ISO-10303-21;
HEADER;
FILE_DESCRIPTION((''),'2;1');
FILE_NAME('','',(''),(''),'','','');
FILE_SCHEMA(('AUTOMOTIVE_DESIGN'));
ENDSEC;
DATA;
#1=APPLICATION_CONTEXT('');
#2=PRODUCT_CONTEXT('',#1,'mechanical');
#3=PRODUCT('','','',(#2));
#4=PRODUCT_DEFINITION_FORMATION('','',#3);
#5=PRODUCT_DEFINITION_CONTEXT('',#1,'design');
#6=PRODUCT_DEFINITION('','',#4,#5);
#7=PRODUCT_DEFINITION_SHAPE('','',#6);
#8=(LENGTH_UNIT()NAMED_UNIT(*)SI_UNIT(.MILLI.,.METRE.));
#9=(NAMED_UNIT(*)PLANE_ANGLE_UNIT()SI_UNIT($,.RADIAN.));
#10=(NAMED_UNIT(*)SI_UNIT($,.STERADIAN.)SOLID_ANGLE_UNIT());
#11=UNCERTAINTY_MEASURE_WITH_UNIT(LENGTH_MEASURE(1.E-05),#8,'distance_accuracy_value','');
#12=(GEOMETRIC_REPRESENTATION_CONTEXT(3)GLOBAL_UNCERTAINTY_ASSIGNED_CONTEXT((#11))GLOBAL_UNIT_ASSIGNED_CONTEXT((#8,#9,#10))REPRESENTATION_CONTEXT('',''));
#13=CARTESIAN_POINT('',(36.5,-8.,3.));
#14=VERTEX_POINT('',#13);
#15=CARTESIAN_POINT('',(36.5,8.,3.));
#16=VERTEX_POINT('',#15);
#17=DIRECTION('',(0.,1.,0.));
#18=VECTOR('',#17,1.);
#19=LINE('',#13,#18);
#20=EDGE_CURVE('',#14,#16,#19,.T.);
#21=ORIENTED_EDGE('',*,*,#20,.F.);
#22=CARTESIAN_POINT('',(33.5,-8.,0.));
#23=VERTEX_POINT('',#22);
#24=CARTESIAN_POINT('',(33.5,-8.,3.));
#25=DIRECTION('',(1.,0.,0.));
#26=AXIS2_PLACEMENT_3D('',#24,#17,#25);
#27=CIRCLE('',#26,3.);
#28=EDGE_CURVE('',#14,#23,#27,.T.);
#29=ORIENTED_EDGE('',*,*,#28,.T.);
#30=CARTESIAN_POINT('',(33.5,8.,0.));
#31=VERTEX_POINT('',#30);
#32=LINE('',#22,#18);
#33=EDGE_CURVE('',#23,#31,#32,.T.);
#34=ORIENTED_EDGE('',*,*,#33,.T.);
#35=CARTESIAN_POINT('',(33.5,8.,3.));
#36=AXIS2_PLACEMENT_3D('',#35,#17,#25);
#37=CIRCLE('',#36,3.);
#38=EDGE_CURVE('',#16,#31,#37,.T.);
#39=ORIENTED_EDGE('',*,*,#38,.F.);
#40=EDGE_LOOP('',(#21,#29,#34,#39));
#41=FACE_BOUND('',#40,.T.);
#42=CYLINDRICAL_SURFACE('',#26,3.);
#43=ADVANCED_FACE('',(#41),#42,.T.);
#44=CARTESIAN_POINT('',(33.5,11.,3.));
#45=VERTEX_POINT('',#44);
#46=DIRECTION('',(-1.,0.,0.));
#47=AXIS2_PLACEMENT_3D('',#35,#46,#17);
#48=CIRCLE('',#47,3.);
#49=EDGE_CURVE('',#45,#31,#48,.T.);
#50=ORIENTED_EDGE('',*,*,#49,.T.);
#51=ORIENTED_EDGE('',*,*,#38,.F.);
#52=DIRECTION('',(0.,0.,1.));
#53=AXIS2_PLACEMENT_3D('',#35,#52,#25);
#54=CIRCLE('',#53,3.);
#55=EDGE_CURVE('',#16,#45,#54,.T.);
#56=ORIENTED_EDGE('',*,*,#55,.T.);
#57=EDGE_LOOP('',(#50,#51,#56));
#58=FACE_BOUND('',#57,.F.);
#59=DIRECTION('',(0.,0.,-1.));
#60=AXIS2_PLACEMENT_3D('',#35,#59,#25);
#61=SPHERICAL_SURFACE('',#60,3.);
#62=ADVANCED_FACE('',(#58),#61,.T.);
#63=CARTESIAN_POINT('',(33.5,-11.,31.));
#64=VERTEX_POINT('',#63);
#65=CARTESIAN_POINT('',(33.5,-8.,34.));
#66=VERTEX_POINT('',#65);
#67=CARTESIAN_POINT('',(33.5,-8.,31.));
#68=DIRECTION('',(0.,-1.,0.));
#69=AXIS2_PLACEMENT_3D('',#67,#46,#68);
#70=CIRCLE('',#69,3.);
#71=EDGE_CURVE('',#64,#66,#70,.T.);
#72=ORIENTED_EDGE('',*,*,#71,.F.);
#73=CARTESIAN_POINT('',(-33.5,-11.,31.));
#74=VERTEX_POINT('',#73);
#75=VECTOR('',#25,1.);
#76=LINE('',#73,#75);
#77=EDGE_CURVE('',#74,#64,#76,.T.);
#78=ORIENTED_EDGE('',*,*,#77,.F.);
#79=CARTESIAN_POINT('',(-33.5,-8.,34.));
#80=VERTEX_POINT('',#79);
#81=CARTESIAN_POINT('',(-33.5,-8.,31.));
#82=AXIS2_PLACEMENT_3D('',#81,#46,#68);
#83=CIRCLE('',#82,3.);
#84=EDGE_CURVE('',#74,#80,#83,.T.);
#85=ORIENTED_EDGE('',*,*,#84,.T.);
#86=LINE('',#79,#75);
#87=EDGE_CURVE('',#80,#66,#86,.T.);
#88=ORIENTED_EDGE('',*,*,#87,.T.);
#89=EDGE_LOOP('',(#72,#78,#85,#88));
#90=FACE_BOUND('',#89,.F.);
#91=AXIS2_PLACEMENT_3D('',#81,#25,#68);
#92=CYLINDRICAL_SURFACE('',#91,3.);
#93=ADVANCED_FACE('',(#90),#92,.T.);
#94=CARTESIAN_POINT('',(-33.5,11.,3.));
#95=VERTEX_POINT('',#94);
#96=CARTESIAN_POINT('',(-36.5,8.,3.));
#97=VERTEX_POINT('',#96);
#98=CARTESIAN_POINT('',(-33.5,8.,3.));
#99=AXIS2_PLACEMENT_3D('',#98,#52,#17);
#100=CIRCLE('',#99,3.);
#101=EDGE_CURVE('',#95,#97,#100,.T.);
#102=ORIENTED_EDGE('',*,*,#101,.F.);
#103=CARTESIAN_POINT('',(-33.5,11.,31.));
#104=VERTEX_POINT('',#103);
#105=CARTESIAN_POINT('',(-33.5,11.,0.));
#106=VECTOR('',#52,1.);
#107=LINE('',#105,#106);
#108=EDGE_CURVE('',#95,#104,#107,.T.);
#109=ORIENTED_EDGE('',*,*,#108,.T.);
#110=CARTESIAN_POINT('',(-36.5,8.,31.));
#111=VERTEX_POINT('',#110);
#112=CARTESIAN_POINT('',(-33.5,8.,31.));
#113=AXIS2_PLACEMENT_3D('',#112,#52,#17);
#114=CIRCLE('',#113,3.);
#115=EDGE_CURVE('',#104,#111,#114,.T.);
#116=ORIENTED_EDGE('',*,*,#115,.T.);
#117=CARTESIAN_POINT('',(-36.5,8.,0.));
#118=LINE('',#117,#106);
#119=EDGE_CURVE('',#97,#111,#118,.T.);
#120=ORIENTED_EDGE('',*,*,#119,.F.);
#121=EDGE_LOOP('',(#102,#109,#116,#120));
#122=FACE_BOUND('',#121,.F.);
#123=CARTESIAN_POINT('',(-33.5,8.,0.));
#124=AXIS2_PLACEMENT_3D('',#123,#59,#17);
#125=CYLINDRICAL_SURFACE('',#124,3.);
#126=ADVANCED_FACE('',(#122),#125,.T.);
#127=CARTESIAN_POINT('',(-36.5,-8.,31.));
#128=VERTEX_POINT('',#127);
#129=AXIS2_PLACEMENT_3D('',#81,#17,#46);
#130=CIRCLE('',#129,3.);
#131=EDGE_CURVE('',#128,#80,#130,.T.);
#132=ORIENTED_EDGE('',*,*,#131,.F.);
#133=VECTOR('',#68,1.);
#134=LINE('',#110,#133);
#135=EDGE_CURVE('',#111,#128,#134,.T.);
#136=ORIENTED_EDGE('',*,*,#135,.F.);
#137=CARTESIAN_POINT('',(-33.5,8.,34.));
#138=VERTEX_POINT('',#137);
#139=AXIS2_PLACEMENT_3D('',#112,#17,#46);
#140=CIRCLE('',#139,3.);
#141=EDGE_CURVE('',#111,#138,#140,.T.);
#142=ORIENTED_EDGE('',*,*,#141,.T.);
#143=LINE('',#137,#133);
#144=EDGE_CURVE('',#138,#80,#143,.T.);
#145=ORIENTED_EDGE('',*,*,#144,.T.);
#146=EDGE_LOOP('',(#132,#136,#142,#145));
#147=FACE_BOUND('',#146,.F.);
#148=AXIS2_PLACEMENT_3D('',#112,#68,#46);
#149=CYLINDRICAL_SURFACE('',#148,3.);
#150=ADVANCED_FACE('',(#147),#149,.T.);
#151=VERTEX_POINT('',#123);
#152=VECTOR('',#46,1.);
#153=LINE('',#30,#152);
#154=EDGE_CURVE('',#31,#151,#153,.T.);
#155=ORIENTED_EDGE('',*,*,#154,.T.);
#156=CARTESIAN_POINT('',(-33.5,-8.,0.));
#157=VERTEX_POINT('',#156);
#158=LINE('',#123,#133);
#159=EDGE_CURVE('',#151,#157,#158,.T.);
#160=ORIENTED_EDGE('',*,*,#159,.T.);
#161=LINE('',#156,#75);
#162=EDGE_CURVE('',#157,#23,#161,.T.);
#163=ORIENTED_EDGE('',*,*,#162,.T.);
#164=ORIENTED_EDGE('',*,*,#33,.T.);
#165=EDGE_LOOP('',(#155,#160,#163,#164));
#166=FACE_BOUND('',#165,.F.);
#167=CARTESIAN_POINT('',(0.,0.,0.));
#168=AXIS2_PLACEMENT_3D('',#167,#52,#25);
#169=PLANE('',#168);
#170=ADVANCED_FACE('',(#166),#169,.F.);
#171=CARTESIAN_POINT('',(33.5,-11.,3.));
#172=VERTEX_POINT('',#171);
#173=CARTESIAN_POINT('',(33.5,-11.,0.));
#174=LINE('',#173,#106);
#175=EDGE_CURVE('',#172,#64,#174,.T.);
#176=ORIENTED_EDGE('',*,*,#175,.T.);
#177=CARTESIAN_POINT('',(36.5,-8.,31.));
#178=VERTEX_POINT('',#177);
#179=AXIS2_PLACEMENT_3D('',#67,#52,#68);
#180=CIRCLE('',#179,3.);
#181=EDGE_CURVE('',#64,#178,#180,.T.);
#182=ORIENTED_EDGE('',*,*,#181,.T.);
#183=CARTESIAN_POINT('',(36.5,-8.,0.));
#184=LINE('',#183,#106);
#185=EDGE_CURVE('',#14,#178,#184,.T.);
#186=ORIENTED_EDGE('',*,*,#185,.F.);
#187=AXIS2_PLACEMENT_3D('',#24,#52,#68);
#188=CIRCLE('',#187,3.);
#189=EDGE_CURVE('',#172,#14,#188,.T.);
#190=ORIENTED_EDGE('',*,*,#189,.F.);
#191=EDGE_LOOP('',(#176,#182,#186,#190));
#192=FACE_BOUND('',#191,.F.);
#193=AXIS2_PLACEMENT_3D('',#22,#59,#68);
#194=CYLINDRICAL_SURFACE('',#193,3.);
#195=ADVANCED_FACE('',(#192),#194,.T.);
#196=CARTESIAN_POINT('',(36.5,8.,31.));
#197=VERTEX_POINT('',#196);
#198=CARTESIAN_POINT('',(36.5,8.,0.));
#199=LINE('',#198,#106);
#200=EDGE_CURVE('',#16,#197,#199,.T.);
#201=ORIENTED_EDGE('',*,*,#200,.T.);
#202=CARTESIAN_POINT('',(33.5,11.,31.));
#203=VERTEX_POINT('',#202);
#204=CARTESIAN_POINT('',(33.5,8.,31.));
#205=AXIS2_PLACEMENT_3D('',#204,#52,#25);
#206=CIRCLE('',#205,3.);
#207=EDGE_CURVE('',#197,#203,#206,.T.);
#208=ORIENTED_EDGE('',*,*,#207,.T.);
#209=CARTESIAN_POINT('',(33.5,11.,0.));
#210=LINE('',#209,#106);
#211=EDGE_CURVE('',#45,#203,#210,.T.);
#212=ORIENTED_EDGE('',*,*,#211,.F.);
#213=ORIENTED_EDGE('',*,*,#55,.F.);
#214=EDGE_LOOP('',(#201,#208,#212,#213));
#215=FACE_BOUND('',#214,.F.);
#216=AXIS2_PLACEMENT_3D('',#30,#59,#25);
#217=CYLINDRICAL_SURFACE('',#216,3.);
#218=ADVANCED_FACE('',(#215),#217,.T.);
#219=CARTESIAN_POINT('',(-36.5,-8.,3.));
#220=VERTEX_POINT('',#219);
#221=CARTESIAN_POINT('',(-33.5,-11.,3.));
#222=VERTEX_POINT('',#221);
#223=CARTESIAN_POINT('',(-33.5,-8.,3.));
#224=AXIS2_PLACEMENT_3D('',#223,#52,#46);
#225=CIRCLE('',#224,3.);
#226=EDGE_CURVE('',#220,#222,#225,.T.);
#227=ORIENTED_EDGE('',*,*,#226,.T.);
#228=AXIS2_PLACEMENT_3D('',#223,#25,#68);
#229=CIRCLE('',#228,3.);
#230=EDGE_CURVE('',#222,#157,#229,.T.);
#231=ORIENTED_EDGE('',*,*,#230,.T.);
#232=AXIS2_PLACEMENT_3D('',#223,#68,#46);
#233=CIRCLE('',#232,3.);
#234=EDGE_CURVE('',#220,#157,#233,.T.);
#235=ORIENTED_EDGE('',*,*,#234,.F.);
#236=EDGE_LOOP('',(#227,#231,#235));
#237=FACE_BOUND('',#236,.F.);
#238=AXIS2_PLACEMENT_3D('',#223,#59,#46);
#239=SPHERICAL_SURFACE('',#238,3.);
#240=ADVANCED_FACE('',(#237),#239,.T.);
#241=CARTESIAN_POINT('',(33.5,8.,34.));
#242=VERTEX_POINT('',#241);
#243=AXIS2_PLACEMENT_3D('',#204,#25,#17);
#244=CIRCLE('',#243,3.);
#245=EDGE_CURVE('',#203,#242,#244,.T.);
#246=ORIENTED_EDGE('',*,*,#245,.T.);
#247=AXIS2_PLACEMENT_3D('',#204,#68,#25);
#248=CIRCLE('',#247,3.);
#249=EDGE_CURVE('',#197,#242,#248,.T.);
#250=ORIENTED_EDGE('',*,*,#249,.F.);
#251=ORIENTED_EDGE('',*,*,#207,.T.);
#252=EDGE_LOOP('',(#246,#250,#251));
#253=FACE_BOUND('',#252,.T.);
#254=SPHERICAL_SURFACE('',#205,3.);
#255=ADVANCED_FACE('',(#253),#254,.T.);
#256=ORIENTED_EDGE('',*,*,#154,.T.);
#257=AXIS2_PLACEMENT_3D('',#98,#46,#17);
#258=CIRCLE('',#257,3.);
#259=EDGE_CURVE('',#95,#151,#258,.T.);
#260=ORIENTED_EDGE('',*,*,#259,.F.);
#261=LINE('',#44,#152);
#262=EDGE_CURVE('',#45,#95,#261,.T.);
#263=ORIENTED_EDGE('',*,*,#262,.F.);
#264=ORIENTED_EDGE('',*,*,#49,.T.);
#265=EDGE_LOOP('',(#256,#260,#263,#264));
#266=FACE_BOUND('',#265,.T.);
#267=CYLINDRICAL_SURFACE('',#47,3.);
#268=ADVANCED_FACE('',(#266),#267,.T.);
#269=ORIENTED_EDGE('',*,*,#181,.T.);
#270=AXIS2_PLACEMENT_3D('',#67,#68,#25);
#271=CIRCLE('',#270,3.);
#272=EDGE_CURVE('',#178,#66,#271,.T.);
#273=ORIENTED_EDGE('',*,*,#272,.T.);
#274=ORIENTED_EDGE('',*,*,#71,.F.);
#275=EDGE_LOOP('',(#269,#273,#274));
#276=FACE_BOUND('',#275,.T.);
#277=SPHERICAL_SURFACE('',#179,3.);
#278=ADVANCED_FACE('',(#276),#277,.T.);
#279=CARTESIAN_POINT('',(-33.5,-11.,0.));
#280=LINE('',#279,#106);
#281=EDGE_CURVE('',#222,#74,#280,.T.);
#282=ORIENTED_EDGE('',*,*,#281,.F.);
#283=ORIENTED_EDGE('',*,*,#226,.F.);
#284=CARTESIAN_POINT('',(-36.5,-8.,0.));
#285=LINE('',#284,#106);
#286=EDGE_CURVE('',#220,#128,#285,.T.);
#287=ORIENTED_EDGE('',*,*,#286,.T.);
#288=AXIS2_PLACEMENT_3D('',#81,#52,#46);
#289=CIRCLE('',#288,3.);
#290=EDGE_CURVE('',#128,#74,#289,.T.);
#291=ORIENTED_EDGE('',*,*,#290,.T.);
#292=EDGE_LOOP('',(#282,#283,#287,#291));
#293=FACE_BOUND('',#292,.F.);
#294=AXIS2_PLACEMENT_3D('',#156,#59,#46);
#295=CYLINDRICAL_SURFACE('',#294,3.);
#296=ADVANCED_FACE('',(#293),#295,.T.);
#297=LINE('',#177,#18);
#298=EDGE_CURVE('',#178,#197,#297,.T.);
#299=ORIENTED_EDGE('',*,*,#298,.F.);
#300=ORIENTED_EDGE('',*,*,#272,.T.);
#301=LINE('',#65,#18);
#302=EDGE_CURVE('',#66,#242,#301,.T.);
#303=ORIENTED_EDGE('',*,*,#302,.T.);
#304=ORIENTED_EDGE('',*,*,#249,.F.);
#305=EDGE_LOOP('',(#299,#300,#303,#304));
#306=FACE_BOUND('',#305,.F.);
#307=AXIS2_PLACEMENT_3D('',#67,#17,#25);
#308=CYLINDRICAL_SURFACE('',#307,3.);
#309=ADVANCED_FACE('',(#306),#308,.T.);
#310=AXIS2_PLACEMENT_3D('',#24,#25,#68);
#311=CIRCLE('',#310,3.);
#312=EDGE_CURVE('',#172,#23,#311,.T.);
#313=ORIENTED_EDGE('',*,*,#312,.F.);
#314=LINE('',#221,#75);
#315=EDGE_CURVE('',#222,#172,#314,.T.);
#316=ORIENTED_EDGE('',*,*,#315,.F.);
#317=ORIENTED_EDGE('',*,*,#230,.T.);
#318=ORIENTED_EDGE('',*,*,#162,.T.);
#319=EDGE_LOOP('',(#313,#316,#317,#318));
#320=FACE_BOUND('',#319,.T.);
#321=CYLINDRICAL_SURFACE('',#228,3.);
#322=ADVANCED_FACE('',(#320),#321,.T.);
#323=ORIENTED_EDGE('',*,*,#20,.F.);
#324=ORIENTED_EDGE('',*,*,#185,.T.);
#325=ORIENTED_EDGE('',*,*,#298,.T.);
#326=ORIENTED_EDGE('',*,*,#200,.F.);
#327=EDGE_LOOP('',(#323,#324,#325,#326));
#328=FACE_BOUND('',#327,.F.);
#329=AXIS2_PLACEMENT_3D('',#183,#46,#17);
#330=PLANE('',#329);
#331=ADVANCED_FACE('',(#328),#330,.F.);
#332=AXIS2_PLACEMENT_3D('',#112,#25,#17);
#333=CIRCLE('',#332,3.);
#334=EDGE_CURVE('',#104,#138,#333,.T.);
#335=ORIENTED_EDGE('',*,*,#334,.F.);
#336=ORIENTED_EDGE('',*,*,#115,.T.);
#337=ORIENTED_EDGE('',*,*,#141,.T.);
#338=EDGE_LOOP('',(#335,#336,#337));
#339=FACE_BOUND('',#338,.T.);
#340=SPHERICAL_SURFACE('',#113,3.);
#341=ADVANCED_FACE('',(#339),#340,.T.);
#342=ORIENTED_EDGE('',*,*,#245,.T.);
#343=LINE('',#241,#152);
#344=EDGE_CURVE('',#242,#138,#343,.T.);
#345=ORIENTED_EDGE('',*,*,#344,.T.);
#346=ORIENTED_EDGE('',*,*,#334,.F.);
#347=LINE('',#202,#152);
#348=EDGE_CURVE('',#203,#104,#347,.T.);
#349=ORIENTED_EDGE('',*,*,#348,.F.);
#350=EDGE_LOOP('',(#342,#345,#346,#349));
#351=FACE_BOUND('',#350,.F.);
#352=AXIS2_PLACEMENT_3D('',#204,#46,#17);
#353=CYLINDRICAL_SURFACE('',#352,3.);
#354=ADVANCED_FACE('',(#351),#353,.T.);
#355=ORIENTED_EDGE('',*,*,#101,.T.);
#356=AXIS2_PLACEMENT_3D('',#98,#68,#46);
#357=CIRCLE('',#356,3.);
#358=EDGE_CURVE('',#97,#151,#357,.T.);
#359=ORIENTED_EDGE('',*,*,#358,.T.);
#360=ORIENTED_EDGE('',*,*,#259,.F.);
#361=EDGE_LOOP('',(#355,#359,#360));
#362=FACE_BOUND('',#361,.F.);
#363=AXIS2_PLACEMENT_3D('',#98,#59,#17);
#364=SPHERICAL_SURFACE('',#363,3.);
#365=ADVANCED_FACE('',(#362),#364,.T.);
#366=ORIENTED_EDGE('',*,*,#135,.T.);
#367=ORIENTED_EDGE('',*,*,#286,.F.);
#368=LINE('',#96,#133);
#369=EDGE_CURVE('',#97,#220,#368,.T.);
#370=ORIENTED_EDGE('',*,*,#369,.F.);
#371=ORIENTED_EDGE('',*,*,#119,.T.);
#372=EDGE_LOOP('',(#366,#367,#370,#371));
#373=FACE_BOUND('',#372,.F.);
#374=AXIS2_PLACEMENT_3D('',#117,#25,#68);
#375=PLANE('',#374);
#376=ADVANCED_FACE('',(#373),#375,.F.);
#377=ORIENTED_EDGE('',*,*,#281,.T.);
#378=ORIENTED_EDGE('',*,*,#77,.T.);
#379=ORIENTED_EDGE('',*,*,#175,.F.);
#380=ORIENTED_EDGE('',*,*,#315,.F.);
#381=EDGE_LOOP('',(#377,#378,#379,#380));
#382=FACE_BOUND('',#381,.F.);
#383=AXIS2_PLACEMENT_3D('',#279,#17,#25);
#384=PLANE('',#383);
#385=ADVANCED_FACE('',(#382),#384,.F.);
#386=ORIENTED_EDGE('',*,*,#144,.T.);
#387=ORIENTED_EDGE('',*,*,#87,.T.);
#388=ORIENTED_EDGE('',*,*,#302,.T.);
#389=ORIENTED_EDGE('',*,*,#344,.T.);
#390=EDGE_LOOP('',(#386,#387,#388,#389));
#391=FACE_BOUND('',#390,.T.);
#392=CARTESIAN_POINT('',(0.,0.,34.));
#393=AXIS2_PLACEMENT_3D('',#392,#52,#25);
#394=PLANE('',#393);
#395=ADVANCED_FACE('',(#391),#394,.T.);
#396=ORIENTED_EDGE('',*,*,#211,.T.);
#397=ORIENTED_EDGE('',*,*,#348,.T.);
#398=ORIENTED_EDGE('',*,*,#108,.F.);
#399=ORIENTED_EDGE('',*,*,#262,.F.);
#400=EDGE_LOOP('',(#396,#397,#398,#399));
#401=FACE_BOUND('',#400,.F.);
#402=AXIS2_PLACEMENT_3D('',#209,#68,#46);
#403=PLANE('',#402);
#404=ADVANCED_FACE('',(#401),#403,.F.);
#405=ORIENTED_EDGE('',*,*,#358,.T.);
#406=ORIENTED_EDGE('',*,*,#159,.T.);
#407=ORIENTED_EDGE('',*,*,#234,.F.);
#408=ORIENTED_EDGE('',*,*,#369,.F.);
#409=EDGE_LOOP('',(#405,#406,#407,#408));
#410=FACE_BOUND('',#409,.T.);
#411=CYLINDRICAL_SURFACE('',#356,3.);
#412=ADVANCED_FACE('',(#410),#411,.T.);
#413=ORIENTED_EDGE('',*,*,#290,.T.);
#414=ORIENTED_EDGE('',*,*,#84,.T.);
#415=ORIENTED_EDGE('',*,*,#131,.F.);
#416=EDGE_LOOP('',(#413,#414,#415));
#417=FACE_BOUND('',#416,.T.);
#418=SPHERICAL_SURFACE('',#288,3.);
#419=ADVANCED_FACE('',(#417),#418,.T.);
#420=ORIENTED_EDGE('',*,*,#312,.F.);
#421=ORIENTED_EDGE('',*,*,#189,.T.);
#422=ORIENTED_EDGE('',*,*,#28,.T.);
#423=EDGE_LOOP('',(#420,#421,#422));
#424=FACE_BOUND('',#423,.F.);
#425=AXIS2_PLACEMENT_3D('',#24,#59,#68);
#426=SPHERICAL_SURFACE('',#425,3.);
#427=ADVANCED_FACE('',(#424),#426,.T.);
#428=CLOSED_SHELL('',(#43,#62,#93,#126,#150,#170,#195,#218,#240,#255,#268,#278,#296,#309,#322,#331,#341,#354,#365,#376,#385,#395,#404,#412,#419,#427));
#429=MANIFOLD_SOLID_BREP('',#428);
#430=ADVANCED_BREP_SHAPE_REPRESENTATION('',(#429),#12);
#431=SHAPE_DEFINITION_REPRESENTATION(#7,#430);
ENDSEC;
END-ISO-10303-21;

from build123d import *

# Parameters (mm, degrees)
F1_DEPTH = 34
F2_R     = 3


with BuildPart() as f1:
    # F0 (on Top) → F1 (new body)
    with BuildSketch(Plane.XY):
        with BuildLine():
            Line((33.5, 11), (-33.5, 11))
            ThreePointArc((-33.5, 11), (-35.6213203436, 10.1213203436), (-36.5, 8))
            Line((-36.5, 8), (-36.5, -8))
            ThreePointArc((-36.5, -8), (-35.6213203436, -10.1213203436), (-33.5, -11))
            Line((-33.5, -11), (33.5, -11))
            ThreePointArc((33.5, -11), (35.6213203436, -10.1213203436), (36.5, -8))
            Line((36.5, -8), (36.5, 8))
            ThreePointArc((36.5, 8), (35.6213203436, 10.1213203436), (33.5, 11))
        make_face()
    extrude(amount=F1_DEPTH)

    # F2
    f2_edges = [f1.edges().sort_by_distance(p)[0] for p in [
        (36.5, 0, 0),
        (35.62132, 10.12132, 0),
        (0, 11, 0),
        (-35.62132, 10.12132, 0),
        (-36.5, 0, 0),
        (-35.62132, -10.12132, 0),
        (0, -11, 0),
        (35.62132, -10.12132, 0),
        (36.5, 0, 34),
        (35.62132, 10.12132, 34),
        (0, 11, 34),
        (-35.62132, 10.12132, 34),
        (-36.5, 0, 34),
        (-35.62132, -10.12132, 34),
        (0, -11, 34),
        (35.62132, -10.12132, 34),
    ]]
    fillet(f2_edges, radius=F2_R)


solid = f1.part
